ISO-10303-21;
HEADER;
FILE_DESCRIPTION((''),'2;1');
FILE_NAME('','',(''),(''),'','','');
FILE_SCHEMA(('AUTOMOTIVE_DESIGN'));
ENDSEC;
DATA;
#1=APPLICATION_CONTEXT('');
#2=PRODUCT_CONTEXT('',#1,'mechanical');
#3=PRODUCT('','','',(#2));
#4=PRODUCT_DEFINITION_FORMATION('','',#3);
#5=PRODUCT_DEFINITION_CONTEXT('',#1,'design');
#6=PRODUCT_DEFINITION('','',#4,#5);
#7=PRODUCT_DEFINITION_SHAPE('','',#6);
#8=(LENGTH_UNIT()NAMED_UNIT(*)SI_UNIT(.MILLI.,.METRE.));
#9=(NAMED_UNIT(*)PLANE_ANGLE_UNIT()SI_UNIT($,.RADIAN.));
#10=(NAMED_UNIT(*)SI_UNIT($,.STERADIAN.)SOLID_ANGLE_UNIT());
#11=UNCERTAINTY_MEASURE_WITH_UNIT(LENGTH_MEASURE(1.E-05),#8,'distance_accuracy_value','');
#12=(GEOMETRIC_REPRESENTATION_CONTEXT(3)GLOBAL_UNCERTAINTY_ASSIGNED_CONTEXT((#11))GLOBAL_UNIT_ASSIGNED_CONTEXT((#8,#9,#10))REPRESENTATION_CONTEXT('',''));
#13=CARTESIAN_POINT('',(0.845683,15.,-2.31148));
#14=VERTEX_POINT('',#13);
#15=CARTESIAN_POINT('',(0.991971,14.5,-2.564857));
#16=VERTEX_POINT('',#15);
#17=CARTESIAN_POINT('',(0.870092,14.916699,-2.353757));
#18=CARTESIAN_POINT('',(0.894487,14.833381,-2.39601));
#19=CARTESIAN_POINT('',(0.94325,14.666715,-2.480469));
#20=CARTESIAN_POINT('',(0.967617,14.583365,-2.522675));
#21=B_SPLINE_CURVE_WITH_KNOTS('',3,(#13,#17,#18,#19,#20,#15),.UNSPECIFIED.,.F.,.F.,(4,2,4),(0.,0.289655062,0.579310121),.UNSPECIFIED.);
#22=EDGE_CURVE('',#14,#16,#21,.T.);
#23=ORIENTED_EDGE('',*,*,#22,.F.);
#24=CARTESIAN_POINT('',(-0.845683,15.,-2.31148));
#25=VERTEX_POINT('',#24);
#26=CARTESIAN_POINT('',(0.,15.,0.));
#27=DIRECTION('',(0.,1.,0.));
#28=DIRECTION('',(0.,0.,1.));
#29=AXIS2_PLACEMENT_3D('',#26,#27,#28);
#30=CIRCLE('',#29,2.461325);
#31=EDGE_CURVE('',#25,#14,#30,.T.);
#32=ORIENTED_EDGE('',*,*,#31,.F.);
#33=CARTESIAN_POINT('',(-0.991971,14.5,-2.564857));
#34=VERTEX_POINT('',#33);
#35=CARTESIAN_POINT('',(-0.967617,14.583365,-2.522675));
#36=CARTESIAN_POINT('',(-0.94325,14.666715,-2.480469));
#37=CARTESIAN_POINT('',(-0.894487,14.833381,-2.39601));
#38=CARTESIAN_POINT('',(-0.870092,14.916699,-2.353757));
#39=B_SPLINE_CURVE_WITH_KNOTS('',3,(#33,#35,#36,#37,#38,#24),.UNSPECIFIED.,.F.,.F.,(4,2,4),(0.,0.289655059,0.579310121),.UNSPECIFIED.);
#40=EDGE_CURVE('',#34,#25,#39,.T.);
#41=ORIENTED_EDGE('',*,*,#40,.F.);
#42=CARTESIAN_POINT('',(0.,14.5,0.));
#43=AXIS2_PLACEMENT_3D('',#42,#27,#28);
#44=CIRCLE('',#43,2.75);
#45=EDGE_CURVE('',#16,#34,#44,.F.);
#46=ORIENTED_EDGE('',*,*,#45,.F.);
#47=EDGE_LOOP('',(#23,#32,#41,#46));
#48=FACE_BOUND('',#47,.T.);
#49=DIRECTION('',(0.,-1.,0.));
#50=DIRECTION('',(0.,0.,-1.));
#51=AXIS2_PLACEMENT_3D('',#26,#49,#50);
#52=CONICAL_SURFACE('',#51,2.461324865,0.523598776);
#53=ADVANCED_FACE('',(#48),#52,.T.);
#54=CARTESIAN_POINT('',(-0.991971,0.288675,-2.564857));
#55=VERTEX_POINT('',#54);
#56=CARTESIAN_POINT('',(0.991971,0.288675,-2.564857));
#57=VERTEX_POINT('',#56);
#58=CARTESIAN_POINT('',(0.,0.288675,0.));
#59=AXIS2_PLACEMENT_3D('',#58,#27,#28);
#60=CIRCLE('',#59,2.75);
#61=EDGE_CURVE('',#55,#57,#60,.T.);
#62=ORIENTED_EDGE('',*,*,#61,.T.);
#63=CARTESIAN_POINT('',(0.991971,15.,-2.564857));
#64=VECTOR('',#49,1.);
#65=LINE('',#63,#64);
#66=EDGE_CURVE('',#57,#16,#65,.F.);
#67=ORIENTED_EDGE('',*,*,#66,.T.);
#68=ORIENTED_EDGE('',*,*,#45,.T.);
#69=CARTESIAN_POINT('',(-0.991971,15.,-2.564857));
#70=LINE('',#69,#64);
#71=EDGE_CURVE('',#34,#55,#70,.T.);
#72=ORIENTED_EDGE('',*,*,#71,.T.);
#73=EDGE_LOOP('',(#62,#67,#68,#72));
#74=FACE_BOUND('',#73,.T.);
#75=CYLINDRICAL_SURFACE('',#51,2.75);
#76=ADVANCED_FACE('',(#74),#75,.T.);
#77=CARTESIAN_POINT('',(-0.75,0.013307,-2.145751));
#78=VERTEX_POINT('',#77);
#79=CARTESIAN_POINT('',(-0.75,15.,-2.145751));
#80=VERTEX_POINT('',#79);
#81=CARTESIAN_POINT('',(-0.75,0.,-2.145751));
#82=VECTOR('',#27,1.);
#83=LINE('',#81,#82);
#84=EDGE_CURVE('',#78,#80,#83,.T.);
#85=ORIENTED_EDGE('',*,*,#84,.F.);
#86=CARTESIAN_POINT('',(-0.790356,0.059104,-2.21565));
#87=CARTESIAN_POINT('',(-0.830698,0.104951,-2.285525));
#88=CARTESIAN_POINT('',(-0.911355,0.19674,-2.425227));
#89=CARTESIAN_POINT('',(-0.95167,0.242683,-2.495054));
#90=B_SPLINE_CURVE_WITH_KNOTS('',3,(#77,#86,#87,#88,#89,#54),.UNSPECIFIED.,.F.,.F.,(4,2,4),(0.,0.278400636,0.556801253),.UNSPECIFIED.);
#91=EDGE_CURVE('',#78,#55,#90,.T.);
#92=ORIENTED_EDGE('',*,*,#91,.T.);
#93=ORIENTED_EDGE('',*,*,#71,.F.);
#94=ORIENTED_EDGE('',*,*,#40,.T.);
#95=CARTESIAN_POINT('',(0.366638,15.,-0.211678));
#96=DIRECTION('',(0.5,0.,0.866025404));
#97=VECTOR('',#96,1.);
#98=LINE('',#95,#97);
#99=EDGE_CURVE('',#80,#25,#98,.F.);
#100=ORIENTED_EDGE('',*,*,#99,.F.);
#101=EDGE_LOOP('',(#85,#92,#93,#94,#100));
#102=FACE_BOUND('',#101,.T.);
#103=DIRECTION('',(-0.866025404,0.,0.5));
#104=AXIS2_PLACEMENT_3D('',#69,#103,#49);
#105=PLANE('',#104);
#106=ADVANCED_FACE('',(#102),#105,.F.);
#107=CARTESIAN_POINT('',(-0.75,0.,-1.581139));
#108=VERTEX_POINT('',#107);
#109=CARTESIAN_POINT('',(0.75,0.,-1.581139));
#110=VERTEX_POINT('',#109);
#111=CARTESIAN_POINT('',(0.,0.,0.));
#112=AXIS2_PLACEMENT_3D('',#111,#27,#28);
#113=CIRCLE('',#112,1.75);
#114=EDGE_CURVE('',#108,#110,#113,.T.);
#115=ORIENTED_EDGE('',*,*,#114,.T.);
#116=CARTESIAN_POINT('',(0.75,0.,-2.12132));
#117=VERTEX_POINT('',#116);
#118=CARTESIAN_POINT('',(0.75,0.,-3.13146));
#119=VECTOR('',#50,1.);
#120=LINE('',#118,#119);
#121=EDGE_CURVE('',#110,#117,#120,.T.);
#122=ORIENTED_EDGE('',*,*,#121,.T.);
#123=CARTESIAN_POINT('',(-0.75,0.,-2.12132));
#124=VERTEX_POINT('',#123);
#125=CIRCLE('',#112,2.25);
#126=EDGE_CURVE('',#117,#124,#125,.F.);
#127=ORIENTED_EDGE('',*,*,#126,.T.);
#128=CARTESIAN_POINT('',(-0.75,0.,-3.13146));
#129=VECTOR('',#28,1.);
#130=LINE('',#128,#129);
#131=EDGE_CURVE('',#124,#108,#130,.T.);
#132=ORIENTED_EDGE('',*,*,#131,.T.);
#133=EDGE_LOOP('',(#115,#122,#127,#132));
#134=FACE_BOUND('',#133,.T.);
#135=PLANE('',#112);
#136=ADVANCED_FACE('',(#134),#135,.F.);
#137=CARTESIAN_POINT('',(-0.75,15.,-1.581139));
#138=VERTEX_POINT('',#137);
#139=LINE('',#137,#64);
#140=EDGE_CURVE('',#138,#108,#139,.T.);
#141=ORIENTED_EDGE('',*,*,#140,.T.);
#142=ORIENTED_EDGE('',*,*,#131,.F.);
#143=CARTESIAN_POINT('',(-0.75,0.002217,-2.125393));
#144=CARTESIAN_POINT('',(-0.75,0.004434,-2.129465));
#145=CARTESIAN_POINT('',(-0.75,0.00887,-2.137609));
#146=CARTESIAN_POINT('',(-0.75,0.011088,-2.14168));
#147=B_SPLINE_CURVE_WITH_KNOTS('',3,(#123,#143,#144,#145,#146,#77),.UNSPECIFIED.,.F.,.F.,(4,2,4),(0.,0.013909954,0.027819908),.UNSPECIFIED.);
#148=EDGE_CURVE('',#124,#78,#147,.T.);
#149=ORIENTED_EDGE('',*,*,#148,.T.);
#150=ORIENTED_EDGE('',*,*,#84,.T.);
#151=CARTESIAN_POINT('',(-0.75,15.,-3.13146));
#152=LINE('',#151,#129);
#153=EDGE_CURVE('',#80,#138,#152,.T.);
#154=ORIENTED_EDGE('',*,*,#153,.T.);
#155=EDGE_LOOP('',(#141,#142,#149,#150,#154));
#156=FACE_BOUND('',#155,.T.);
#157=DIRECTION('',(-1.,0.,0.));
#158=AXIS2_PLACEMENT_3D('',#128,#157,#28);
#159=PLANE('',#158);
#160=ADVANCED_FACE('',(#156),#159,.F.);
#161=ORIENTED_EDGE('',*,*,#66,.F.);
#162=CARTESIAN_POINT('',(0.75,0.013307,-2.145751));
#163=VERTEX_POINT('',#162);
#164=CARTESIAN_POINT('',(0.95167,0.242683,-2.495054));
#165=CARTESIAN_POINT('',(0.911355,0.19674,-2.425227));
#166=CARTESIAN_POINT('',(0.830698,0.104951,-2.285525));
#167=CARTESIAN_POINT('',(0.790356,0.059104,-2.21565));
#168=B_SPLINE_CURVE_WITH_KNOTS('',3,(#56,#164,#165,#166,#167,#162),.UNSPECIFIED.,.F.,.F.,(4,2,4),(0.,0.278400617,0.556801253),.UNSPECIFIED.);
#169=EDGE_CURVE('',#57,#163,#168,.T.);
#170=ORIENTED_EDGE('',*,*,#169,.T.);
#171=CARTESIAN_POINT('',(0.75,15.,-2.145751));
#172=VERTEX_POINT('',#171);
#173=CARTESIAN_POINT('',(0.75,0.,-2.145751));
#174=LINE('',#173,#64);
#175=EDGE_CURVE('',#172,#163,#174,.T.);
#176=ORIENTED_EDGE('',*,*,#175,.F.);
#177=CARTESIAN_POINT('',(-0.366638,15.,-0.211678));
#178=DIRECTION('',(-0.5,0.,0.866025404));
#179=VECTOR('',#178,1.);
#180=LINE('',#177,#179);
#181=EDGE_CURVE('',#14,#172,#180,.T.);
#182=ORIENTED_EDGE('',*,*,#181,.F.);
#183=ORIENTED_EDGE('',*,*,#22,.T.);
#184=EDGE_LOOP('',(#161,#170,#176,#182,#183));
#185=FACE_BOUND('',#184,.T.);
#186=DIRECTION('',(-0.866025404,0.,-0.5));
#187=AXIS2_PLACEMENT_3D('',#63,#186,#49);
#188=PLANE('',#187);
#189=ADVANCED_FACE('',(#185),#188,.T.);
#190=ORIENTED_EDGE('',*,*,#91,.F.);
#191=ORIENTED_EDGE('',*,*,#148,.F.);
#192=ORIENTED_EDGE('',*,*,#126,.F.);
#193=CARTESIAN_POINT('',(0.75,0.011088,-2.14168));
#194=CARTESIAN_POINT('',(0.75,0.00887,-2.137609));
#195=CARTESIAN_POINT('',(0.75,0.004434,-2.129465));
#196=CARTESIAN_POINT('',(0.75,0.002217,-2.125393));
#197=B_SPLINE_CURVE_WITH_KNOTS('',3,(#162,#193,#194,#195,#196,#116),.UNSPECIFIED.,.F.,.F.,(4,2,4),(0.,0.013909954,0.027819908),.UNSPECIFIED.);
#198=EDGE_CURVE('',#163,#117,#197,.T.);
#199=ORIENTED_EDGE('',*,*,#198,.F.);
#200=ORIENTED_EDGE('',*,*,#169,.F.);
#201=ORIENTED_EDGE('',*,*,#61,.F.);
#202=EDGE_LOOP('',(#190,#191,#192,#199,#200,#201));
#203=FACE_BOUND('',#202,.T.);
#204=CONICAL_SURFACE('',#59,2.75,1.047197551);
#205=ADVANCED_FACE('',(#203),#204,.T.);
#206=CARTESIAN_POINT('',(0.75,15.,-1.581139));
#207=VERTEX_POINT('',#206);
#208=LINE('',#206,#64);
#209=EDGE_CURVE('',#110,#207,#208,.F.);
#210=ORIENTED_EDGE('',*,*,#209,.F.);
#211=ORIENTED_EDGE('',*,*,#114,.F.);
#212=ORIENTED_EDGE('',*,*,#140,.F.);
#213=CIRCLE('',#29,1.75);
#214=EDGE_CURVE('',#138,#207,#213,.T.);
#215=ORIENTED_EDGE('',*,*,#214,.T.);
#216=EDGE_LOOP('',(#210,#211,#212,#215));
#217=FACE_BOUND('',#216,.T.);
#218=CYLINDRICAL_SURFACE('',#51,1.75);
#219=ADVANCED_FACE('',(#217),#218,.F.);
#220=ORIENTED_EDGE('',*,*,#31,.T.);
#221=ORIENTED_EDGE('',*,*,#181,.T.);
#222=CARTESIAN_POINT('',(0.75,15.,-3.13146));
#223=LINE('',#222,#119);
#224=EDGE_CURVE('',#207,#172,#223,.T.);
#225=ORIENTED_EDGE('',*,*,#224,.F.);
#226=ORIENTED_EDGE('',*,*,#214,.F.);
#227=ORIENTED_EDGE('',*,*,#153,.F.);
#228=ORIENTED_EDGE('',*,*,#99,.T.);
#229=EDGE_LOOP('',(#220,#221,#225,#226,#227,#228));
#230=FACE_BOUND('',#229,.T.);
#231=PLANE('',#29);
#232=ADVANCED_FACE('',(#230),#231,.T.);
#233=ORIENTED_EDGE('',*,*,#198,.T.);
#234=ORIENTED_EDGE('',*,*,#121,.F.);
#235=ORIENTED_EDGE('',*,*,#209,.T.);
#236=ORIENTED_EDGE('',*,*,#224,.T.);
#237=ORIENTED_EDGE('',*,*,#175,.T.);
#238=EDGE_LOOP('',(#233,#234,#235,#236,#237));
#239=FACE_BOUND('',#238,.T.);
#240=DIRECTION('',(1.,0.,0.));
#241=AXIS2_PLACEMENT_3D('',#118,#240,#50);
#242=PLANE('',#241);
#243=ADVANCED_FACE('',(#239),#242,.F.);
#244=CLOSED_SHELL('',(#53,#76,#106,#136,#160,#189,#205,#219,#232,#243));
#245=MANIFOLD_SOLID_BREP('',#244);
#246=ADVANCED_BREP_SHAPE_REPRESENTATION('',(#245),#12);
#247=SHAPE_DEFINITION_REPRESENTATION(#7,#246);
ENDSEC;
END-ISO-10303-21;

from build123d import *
from OCP.BRepFilletAPI import BRepFilletAPI_MakeChamfer

# Parameters (mm, degrees)
ESBO_O1_R                = 2.75
ESBO_O1_R_2              = 1.75
RESSALTO_EXTRUS_O1_DEPTH = 15
ESBO_O2_W                = 1.5
ESBO_O2_H                = 2.767894019
CORTE_EXTRUS_O1_DEPTH    = 16.495967217
CHANFRO1_SIZE            = 0.5
CHANFRO2_SIZE            = 0.5
CHANFRO2_SIZE2           = 0.288675135


with BuildPart() as part:
    # Esboço1 → Ressalto-extrusão1 (new body)
    with BuildSketch(Plane(origin=(0, 0, 0), x_dir=(1, 0, 0), z_dir=(0, 1, 0))):
        with Locations(Location((0, 0, 0), (0, 0, 270))):
            Circle(ESBO_O1_R)
        with Locations(Location((0, 0, 0), (0, 0, 270))):
            Circle(ESBO_O1_R_2, mode=Mode.SUBTRACT)
    extrude(amount=RESSALTO_EXTRUS_O1_DEPTH)

    # Esboço2 → Corte-extrusão1 (cut, through all)
    with BuildSketch(Plane(origin=(0, 15, 0), x_dir=(1, 0, 0), z_dir=(0, 1, 0))):
        with Locations((0, 1.747513295)):
            Rectangle(ESBO_O2_W, ESBO_O2_H)
    extrude(amount=-CORTE_EXTRUS_O1_DEPTH, mode=Mode.SUBTRACT)

    # Chanfro1
    # the kernel refuses this chamfer: 0.5, 0.257849129 mm, written as the material it takes off along each edge
    with BuildSketch(Plane(origin=(-0.75, 16.293542877, -2.645751311), x_dir=(-0.9484043695289113, 0, 0.3170633246821023), z_dir=(0, -1, 0))) as chanfro1_piece_1:
        with BuildLine():
            Line((0.25513486, 0), (CHANFRO1_SIZE * 0.317063324682, -CHANFRO1_SIZE * 0.948404369529))
            Line((CHANFRO1_SIZE * 0.317063324682, -CHANFRO1_SIZE * 0.948404369529), (0, 0))
            ThreePointArc((0, 0), (0.129558651, 0.002959681), (0.25513486, 0))
        make_face()
    extrude(amount=17.587085755, mode=Mode.SUBTRACT)
    with BuildSketch(Plane(origin=(0.75, 16.293542877, -2.645751311), x_dir=(0.948404369528912, 0, 0.3170633246821001), z_dir=(0, -1, 0))) as chanfro1_piece_2:
        with BuildLine():
            Line((0.25513486, 0), (CHANFRO1_SIZE * 0.317063324682, CHANFRO1_SIZE * 0.948404369529))
            Line((CHANFRO1_SIZE * 0.317063324682, CHANFRO1_SIZE * 0.948404369529), (0, 0))
            ThreePointArc((0, 0), (0.129558651, -0.002959681), (0.25513486, 0))
        make_face()
    extrude(amount=17.587085755, mode=Mode.SUBTRACT)

    # Chanfro2: one chamfer whose edges measure the first distance from different faces: ONE call of the kernel's chamfer builder (chamfer() names one face for all edges)
    chanfro2_edges_1 = [part.edges().sort_by_distance(p)[0] for p in [
        (0, 0, 2.75),
    ]]
    chanfro2_side_1 = [part.faces().sort_by_distance(p)[0] for p in [
        (-0.937222417, 0, -2.31706246),
    ]]
    chanfro2_edges_2 = [part.edges().sort_by_distance(p)[0] for p in [
        (0, 15, 2.75),
    ]]
    chanfro2_side_2 = [part.faces().sort_by_distance(p)[0] for p in [
        (0, 7.5, 2.75),
    ]]
    chanfro2 = BRepFilletAPI_MakeChamfer(part.part.solid().wrapped)
    for e in chanfro2_edges_1:
        chanfro2.Add(CHANFRO2_SIZE, CHANFRO2_SIZE2, e.wrapped, chanfro2_side_1[0].wrapped)  # the first distance lies on this face
    for e in chanfro2_edges_2:
        chanfro2.Add(CHANFRO2_SIZE, CHANFRO2_SIZE2, e.wrapped, chanfro2_side_2[0].wrapped)  # the first distance lies on this face
    add(Compound.cast(chanfro2.Shape()), mode=Mode.REPLACE)


solid = part.part
